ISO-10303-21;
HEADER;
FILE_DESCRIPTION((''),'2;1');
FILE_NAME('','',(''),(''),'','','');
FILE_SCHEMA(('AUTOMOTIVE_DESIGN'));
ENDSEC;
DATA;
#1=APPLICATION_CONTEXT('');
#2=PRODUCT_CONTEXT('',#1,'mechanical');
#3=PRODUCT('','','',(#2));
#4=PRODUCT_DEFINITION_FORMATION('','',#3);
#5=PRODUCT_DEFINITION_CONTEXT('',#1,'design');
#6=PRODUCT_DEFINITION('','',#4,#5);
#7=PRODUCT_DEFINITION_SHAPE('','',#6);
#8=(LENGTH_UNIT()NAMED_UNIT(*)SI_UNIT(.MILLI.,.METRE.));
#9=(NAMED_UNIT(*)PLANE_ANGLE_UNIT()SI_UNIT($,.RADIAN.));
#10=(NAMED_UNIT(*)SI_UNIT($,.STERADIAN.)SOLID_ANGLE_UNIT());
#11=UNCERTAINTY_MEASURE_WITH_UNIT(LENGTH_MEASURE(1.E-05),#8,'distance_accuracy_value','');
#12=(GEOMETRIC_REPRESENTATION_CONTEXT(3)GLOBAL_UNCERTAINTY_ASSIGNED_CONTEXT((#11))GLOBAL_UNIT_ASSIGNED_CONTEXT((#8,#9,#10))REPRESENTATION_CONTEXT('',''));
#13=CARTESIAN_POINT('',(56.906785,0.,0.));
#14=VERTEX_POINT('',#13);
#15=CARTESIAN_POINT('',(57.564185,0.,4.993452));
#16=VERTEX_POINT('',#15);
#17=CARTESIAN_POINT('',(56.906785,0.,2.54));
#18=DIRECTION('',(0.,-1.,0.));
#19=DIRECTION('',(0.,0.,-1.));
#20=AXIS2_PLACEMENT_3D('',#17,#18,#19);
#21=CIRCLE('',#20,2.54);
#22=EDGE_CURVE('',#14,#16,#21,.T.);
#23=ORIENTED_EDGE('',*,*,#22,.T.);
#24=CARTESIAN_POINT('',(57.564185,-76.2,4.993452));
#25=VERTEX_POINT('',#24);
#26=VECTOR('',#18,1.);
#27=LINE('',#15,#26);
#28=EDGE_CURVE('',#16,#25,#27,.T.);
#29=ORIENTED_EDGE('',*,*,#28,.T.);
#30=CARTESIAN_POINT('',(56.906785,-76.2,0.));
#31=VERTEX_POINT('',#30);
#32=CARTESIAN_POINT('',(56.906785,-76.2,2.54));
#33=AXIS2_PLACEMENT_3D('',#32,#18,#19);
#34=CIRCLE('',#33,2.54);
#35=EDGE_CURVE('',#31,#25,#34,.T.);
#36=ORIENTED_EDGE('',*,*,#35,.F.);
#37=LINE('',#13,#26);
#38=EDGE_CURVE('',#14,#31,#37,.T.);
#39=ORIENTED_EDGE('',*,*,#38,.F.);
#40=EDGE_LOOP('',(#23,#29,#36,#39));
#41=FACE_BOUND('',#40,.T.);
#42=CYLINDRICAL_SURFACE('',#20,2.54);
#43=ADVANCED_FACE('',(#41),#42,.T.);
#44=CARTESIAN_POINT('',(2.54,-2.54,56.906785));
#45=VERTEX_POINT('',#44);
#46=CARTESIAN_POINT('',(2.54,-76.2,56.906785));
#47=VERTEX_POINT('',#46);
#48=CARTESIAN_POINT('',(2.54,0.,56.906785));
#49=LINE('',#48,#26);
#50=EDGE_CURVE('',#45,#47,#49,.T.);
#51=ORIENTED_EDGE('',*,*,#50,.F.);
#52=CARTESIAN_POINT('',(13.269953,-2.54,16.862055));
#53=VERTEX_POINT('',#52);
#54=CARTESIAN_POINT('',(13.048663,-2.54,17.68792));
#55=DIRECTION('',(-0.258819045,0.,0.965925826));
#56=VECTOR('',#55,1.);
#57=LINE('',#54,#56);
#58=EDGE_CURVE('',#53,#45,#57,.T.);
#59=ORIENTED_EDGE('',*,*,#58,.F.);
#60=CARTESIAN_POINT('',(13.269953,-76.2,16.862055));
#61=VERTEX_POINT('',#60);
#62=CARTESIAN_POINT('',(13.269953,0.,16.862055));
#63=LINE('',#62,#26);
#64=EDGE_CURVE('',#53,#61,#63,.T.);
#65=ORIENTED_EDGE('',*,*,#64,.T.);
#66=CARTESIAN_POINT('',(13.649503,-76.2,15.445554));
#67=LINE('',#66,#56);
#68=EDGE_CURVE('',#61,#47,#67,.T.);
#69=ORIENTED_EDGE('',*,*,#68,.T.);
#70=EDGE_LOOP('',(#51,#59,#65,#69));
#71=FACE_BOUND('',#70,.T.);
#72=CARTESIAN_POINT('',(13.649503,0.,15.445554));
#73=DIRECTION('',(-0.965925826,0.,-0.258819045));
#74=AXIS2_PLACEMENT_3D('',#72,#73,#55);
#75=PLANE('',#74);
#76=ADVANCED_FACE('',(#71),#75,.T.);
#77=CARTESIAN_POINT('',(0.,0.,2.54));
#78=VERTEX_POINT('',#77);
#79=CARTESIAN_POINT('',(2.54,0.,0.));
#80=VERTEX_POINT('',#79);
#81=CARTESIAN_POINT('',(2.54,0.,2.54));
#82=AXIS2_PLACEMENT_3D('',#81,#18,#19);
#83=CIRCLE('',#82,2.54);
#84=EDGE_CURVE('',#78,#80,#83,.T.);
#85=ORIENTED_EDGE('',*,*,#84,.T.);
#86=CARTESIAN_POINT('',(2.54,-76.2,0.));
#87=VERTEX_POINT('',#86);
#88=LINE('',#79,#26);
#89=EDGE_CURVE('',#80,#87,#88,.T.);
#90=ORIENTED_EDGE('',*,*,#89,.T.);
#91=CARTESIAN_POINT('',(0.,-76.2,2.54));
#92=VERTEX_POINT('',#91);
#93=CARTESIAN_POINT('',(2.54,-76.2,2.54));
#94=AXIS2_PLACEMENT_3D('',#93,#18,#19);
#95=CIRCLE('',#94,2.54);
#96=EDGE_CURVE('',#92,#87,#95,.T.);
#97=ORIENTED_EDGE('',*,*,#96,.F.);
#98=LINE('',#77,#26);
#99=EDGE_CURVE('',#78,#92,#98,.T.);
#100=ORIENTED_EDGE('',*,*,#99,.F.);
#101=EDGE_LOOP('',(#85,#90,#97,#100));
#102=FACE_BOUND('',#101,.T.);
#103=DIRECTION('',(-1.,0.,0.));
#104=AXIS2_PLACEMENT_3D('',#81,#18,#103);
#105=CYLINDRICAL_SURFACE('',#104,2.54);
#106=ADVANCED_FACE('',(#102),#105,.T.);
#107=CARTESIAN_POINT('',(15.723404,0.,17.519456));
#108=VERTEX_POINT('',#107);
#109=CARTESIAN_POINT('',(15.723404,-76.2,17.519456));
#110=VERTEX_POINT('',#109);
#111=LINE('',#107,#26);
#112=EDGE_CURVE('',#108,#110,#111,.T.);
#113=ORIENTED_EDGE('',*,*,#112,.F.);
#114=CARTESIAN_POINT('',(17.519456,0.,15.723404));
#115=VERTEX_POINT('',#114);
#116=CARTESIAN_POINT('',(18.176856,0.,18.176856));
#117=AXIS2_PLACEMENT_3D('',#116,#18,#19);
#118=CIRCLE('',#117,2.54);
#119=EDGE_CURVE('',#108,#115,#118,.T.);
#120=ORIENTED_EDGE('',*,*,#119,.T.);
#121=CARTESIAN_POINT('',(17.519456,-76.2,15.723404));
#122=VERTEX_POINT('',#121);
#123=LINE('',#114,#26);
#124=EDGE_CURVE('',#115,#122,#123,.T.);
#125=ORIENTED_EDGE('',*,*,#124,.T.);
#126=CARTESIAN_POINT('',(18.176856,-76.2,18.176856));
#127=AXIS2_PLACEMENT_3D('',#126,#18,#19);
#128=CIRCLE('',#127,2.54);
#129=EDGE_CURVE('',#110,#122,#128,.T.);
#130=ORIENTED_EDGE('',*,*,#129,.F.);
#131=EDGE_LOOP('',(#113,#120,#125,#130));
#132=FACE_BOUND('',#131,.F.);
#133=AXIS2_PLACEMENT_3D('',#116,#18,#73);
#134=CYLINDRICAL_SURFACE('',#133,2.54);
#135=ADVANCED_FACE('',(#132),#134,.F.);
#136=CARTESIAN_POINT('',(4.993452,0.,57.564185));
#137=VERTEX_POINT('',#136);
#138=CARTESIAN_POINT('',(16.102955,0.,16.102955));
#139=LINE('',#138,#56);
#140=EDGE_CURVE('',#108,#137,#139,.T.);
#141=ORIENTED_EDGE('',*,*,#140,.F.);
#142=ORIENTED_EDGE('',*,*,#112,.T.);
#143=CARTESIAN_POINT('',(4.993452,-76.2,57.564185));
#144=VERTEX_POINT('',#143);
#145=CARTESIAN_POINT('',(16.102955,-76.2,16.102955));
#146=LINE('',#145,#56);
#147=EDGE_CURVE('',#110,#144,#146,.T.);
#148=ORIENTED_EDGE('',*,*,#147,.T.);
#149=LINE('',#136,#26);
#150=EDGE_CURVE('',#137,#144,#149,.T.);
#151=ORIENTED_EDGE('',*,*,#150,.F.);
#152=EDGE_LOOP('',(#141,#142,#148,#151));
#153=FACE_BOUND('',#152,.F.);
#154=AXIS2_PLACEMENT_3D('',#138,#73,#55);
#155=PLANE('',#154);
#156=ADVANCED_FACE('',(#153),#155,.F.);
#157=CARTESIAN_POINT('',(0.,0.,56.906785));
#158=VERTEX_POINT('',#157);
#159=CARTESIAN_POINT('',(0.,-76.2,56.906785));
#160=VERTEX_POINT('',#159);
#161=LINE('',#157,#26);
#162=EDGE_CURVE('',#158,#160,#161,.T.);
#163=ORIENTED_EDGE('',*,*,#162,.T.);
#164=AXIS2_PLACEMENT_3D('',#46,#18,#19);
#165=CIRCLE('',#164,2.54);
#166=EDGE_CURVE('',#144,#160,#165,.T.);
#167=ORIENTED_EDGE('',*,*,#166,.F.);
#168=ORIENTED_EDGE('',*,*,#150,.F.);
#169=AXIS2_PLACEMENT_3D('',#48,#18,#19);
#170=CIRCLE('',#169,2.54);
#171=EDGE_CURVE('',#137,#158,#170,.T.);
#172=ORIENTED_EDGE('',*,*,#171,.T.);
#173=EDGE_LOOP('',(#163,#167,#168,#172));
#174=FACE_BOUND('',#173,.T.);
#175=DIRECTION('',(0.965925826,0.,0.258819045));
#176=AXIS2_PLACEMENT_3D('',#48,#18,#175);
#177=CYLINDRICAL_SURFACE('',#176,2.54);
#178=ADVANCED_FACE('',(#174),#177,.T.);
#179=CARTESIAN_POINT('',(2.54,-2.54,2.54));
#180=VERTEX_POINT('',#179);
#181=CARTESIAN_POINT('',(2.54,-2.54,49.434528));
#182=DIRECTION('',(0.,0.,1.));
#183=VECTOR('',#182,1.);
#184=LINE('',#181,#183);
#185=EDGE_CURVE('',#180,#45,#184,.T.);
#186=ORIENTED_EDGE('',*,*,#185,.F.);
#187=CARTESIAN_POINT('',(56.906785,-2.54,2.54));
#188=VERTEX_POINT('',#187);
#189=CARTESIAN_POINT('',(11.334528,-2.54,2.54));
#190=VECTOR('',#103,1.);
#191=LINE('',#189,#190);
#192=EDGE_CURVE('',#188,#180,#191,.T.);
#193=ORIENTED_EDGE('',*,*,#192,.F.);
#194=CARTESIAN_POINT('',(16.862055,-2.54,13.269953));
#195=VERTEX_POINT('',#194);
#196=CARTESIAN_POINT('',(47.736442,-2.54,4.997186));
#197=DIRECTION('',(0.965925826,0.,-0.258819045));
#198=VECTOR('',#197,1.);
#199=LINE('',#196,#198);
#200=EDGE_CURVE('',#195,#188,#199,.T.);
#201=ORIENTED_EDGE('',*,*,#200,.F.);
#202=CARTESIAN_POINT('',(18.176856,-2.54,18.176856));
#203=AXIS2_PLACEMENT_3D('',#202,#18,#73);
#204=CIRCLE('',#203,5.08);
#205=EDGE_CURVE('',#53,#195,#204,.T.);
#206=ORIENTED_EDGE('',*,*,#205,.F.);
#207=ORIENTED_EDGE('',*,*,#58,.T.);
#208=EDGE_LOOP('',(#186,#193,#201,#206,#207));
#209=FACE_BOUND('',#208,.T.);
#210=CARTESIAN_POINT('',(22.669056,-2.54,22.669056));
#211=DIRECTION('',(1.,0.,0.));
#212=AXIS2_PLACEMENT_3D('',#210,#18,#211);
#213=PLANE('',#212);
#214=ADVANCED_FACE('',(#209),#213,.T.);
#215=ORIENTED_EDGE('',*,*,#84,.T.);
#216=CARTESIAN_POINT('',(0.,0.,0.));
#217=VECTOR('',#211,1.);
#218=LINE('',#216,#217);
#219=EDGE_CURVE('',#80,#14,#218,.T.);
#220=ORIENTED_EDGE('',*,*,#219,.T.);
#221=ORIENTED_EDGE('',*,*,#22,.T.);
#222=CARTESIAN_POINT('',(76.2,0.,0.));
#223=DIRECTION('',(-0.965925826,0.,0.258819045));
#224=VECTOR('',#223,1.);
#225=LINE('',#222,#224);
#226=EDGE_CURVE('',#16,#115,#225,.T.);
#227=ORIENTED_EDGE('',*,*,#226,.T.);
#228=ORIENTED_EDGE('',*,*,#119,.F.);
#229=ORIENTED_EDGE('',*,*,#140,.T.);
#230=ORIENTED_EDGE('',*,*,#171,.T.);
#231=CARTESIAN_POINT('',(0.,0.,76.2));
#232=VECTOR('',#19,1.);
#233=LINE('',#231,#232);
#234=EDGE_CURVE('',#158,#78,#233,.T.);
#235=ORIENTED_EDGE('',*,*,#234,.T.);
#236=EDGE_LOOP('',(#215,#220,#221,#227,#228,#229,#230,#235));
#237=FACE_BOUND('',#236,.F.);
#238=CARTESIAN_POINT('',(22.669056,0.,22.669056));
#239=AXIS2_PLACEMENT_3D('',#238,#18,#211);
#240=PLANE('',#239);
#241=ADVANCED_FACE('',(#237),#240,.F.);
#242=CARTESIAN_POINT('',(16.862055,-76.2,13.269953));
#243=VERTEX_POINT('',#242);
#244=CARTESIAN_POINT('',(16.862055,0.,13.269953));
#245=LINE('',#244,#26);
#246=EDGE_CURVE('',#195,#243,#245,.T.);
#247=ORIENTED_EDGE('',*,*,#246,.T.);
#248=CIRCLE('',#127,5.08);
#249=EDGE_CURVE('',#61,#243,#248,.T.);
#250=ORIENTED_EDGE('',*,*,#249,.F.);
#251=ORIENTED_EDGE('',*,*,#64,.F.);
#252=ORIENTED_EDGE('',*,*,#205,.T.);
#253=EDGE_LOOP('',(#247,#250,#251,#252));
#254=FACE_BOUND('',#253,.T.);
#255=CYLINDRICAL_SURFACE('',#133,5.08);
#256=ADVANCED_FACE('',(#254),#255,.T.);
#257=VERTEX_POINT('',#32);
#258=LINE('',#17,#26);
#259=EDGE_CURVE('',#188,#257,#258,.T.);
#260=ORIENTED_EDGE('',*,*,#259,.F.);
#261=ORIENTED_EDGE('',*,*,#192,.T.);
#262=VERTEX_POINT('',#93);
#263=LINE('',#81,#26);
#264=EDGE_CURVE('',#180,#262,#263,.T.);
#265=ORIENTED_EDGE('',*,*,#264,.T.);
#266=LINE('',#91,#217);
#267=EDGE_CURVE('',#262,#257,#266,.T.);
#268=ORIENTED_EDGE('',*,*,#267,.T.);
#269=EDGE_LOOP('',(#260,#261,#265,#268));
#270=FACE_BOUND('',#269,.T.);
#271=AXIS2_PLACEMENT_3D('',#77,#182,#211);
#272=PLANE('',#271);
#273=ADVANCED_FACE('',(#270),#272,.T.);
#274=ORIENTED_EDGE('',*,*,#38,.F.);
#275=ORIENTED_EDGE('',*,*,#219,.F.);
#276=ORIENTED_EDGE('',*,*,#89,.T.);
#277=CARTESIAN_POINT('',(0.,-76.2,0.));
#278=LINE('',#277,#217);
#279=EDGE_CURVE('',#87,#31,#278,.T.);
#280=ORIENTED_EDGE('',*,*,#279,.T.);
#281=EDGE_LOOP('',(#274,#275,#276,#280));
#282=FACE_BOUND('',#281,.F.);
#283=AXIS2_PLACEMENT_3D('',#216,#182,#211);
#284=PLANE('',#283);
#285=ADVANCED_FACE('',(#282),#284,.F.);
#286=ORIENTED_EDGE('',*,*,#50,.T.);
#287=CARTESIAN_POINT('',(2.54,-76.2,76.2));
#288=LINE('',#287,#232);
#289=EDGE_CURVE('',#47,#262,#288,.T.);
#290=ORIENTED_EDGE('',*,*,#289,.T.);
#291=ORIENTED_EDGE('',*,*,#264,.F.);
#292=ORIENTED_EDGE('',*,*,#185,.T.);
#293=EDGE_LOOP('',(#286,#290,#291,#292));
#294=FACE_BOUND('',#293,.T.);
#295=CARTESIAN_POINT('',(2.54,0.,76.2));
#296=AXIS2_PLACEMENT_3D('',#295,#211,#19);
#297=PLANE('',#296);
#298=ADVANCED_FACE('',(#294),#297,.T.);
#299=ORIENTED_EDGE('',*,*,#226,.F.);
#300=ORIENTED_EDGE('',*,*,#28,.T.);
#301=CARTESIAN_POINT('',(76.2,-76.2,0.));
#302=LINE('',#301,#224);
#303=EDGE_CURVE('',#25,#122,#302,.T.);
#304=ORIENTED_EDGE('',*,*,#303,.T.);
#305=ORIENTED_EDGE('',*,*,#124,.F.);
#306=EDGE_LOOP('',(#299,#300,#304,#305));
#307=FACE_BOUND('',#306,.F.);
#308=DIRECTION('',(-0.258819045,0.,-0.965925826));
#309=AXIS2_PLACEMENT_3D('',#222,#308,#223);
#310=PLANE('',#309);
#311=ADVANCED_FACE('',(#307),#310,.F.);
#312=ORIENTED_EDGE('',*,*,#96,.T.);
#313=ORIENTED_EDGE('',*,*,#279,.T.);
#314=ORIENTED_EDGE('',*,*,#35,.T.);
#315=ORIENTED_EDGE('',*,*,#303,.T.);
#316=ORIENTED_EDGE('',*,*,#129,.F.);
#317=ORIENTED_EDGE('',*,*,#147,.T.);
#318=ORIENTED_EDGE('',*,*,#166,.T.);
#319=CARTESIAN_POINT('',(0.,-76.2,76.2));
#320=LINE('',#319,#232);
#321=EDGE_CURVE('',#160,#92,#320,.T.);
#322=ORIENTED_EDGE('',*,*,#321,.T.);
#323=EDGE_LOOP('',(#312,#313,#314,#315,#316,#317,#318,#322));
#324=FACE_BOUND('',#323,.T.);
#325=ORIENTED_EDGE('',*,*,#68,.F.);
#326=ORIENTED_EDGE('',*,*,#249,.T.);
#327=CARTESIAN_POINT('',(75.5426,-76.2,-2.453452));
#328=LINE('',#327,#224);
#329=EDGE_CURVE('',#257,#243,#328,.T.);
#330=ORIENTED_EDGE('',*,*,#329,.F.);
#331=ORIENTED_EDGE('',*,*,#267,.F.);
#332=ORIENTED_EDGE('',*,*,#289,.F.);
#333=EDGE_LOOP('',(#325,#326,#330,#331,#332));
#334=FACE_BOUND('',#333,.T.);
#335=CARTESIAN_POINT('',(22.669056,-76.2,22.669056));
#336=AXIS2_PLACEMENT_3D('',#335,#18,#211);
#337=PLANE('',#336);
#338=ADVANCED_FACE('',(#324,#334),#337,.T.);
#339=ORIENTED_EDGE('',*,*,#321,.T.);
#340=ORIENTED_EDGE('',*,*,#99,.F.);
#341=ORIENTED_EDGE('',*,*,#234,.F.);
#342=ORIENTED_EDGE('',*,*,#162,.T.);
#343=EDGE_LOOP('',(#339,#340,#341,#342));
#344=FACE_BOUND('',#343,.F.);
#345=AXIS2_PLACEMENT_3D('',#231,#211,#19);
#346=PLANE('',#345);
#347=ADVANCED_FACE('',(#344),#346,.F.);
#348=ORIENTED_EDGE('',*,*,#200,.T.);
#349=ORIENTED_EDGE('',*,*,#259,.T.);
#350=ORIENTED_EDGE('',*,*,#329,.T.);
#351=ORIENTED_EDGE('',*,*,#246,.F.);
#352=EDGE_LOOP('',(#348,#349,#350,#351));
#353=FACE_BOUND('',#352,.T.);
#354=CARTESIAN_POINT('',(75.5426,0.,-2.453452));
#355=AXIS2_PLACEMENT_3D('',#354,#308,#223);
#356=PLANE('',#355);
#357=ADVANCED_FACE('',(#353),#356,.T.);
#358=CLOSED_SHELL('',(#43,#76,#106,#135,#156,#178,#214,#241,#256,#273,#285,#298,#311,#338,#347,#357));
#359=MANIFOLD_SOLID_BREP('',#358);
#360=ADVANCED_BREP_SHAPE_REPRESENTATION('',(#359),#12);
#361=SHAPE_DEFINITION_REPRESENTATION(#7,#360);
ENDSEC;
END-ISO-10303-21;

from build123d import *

# Parameters (mm, degrees)
F1_DEPTH = 76.2
F2_R     = 2.54
F3_T     = 2.54


# Not quite as in the source:
# - a shell that OpenCascade refuses in one call is made with other operations: the cavity is built on its own and cut out


with BuildPart() as f1:
    # F0 (on Front) → F1 (new body)
    with BuildSketch(Plane.XZ):
        Polygon((16.1029547439, 16.1029547439), (0, 76.2), (0, 0), (76.2, 0), align=None)
    extrude(amount=F1_DEPTH)

    # F2
    f2_edges = [f1.edges().sort_by_distance(p)[0] for p in [
        (0, -38.1, 76.2),
        (76.2, -38.1, 0),
        (16.102955, -38.1, 16.102955),
        (0, -38.1, 0),
    ]]
    fillet(f2_edges, radius=F2_R)

    # F3: shell of thickness 2.54, made by hand


with BuildPart() as f3_core1:
    # F3_t2: copy of F1
    add(f1.part)

    # the walls: a layer under each face that stays
    f3_faces = [f3_core1.faces().sort_by_distance(p)[0] for p in [
        (10.3584280297, -38.1, 37.5418203066),
        (9.9077974256, 0, 9.9077974256),
        (16.3808048352, -38.1, 16.3808048352),
        (37.5418203066, -38.1, 10.3584280297),
        (0, -38.1, 29.7233922768),
        (29.7233922768, -38.1, 0),
    ]]
    thicken(f3_faces, amount=-F3_T, mode=Mode.SUBTRACT)


with BuildPart() as f1_1:
    add(f1.part)

    # what is left inside the walls is the cavity
    f3_cavity = [f3_core1.part.solids().sort_by_distance(p)[0] for p in [
        (29.723392, -51.646667, 2.5654),
    ]]
    add(f3_cavity, mode=Mode.SUBTRACT)


solid = f1_1.part
